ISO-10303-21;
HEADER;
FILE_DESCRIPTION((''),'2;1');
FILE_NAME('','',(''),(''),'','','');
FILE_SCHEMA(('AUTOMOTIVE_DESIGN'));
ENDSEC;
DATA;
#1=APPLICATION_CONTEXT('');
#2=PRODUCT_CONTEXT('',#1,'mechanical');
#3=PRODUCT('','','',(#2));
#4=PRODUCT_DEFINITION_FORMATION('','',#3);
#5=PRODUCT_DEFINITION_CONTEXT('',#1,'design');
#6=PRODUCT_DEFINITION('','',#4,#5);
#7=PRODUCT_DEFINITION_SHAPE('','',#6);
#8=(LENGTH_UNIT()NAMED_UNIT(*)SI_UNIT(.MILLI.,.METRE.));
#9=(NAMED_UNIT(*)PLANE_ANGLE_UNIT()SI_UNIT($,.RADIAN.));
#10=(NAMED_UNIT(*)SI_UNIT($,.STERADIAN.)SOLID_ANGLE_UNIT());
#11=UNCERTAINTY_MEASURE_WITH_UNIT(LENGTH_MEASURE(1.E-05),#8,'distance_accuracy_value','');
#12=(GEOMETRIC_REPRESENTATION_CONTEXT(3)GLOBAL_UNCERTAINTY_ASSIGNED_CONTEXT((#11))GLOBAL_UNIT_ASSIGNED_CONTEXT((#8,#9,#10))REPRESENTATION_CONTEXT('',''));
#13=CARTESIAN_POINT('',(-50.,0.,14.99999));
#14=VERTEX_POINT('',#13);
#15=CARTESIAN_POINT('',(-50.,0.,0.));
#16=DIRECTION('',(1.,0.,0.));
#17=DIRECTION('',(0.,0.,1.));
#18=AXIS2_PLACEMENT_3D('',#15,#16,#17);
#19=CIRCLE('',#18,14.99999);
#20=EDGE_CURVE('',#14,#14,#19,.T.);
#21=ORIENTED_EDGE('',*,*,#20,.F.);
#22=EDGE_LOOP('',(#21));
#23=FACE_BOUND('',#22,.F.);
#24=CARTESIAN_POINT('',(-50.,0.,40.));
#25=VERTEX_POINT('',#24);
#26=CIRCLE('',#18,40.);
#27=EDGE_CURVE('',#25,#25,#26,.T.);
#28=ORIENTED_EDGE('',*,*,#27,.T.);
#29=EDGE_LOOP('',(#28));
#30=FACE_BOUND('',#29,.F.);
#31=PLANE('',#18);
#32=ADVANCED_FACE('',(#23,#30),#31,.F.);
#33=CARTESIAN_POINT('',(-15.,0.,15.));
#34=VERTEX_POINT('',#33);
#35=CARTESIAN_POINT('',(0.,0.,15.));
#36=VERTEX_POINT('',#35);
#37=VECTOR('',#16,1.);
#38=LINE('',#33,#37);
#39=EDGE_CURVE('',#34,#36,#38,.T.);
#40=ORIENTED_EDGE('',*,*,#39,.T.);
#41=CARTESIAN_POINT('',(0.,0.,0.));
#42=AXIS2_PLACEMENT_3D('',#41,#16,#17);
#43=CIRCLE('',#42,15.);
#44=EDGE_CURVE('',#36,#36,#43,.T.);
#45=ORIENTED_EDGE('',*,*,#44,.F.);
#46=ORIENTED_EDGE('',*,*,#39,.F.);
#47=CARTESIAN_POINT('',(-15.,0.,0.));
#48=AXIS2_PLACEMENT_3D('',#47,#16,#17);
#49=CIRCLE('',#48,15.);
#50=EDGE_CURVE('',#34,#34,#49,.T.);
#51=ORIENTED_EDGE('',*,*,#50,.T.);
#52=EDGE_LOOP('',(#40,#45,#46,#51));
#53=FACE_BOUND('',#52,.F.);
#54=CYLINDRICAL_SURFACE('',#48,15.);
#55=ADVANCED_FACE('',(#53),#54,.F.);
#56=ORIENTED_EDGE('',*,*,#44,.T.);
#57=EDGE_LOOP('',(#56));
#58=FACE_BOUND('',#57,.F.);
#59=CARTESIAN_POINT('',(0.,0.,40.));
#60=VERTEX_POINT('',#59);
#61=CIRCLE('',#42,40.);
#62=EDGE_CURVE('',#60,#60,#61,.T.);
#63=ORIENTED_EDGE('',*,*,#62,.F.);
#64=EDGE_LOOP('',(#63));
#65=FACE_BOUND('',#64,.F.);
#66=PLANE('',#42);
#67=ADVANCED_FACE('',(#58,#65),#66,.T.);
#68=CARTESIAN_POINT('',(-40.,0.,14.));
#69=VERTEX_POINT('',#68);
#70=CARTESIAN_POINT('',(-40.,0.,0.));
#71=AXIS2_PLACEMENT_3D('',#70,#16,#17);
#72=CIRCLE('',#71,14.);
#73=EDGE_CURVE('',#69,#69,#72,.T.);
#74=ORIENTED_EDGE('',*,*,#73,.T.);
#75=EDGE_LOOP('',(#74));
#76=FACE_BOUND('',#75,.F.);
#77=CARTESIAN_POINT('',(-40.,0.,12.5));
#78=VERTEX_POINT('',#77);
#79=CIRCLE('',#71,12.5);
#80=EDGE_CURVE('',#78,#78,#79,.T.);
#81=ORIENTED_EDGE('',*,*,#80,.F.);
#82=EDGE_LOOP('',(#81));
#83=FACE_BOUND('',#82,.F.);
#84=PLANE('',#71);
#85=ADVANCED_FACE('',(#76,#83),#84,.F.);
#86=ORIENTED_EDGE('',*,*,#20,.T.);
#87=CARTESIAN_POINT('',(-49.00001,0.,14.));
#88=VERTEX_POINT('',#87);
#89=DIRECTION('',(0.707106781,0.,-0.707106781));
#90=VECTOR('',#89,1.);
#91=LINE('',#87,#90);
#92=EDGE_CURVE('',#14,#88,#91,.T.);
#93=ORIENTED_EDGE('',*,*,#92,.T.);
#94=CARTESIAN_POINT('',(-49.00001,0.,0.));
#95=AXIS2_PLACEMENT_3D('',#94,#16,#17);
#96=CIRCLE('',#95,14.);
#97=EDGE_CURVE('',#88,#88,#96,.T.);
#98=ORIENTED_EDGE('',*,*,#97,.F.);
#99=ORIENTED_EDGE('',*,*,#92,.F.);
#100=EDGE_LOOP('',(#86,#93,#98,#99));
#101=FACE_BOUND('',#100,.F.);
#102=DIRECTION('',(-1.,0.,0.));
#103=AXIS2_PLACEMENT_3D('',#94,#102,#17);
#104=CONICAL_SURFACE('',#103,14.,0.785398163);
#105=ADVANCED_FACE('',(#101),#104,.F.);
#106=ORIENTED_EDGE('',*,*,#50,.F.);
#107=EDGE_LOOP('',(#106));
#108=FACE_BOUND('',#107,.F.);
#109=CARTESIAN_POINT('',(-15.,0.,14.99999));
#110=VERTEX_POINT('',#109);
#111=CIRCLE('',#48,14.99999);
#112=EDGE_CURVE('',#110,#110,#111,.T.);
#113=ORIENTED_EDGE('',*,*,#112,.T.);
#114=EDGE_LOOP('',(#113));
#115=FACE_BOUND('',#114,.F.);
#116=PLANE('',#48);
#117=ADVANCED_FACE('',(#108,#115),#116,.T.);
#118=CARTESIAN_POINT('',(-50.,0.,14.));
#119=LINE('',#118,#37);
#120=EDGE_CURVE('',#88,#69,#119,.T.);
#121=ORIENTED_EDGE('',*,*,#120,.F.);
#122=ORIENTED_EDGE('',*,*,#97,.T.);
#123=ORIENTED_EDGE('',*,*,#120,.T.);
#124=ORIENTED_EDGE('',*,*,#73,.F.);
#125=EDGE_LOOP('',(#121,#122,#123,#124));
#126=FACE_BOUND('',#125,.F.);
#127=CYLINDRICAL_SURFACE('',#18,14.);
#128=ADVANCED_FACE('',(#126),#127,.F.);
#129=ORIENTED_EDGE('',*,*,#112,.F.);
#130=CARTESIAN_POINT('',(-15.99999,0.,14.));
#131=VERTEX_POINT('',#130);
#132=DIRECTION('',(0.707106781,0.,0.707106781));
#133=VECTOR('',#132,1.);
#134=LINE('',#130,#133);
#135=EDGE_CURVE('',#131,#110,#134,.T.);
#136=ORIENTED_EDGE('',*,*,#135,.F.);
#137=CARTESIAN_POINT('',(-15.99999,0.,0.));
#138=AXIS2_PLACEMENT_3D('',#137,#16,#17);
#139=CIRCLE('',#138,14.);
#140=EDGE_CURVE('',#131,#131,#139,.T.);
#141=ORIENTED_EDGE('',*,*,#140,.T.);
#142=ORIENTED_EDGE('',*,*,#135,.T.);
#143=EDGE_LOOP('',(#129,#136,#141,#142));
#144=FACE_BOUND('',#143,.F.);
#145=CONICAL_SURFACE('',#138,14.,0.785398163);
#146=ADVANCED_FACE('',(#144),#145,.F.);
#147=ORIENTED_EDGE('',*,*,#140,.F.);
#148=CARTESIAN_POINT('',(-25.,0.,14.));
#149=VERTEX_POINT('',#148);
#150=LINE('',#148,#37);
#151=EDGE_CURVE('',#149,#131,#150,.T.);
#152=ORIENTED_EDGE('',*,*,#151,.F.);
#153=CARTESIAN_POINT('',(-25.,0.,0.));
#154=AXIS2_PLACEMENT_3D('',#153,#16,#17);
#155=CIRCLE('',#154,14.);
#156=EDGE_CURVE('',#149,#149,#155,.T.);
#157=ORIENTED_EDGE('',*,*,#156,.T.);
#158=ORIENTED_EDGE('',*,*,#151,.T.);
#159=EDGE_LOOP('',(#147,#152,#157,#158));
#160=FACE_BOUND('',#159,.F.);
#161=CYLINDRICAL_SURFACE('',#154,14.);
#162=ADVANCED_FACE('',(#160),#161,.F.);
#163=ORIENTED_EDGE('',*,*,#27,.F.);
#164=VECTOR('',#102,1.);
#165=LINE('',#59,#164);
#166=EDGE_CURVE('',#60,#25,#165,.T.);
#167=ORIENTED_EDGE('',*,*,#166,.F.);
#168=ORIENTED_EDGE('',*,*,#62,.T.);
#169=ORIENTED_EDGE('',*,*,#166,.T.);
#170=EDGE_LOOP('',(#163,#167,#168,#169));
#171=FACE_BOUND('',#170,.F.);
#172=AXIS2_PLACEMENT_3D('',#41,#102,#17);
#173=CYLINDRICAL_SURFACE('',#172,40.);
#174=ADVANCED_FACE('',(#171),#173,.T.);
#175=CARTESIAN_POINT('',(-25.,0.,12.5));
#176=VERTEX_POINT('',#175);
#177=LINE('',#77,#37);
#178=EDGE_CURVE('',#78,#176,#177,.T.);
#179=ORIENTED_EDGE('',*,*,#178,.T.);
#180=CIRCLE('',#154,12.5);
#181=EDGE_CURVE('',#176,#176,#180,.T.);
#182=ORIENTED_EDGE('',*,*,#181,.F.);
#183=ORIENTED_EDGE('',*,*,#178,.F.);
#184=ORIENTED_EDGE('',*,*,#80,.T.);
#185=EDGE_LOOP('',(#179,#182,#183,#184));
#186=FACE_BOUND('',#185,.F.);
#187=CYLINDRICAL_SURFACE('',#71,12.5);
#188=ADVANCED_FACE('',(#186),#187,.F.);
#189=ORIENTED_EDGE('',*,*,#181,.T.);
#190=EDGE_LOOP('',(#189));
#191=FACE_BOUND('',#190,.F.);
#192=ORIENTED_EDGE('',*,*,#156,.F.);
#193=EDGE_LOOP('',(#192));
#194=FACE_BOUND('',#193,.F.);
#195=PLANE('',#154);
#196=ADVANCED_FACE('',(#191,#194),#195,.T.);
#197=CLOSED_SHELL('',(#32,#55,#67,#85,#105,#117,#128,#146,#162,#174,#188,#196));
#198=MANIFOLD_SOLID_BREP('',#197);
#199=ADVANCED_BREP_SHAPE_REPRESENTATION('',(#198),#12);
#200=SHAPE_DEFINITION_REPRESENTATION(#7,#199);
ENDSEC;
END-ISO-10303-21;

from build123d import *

# Parameters (mm, degrees)
F0_W    = 40
F0_H    = 15
F2_SIZE = 0.99999


# Not quite as in the source:
# - a fillet or chamfer is up to 0.001 mm smaller than in the source, because OpenCascade refuses the exact size


with BuildPart() as f1:
    # F0 (on Front) → F1 (revolve)
    with BuildSketch(Plane.XZ):
        Polygon((-45, 40), (-50, 40), (-50, 14), (-40, 14), (-40, 12.5), (-25, 12.5), (-25, 14), (-15, 14), (-15, 15), (0, 15), (0, 40), (-5, 40), (-5, 25), (-45, 25), align=None)
        with Locations((-25, 32.5)):
            Rectangle(F0_W, F0_H)
    revolve(axis=Axis((-17.5871104002, 0, 0), (1, 0, 0)))

    # F2 (size 1 in the source; OpenCascade refuses exactly that, so slightly less here)
    f2_edges = [f1.edges().sort_by_distance(p)[0] for p in [
        (-15, 0, -14),
        (-50, 0, -14),
    ]]
    chamfer(f2_edges, length=F2_SIZE)


solid = f1.part
